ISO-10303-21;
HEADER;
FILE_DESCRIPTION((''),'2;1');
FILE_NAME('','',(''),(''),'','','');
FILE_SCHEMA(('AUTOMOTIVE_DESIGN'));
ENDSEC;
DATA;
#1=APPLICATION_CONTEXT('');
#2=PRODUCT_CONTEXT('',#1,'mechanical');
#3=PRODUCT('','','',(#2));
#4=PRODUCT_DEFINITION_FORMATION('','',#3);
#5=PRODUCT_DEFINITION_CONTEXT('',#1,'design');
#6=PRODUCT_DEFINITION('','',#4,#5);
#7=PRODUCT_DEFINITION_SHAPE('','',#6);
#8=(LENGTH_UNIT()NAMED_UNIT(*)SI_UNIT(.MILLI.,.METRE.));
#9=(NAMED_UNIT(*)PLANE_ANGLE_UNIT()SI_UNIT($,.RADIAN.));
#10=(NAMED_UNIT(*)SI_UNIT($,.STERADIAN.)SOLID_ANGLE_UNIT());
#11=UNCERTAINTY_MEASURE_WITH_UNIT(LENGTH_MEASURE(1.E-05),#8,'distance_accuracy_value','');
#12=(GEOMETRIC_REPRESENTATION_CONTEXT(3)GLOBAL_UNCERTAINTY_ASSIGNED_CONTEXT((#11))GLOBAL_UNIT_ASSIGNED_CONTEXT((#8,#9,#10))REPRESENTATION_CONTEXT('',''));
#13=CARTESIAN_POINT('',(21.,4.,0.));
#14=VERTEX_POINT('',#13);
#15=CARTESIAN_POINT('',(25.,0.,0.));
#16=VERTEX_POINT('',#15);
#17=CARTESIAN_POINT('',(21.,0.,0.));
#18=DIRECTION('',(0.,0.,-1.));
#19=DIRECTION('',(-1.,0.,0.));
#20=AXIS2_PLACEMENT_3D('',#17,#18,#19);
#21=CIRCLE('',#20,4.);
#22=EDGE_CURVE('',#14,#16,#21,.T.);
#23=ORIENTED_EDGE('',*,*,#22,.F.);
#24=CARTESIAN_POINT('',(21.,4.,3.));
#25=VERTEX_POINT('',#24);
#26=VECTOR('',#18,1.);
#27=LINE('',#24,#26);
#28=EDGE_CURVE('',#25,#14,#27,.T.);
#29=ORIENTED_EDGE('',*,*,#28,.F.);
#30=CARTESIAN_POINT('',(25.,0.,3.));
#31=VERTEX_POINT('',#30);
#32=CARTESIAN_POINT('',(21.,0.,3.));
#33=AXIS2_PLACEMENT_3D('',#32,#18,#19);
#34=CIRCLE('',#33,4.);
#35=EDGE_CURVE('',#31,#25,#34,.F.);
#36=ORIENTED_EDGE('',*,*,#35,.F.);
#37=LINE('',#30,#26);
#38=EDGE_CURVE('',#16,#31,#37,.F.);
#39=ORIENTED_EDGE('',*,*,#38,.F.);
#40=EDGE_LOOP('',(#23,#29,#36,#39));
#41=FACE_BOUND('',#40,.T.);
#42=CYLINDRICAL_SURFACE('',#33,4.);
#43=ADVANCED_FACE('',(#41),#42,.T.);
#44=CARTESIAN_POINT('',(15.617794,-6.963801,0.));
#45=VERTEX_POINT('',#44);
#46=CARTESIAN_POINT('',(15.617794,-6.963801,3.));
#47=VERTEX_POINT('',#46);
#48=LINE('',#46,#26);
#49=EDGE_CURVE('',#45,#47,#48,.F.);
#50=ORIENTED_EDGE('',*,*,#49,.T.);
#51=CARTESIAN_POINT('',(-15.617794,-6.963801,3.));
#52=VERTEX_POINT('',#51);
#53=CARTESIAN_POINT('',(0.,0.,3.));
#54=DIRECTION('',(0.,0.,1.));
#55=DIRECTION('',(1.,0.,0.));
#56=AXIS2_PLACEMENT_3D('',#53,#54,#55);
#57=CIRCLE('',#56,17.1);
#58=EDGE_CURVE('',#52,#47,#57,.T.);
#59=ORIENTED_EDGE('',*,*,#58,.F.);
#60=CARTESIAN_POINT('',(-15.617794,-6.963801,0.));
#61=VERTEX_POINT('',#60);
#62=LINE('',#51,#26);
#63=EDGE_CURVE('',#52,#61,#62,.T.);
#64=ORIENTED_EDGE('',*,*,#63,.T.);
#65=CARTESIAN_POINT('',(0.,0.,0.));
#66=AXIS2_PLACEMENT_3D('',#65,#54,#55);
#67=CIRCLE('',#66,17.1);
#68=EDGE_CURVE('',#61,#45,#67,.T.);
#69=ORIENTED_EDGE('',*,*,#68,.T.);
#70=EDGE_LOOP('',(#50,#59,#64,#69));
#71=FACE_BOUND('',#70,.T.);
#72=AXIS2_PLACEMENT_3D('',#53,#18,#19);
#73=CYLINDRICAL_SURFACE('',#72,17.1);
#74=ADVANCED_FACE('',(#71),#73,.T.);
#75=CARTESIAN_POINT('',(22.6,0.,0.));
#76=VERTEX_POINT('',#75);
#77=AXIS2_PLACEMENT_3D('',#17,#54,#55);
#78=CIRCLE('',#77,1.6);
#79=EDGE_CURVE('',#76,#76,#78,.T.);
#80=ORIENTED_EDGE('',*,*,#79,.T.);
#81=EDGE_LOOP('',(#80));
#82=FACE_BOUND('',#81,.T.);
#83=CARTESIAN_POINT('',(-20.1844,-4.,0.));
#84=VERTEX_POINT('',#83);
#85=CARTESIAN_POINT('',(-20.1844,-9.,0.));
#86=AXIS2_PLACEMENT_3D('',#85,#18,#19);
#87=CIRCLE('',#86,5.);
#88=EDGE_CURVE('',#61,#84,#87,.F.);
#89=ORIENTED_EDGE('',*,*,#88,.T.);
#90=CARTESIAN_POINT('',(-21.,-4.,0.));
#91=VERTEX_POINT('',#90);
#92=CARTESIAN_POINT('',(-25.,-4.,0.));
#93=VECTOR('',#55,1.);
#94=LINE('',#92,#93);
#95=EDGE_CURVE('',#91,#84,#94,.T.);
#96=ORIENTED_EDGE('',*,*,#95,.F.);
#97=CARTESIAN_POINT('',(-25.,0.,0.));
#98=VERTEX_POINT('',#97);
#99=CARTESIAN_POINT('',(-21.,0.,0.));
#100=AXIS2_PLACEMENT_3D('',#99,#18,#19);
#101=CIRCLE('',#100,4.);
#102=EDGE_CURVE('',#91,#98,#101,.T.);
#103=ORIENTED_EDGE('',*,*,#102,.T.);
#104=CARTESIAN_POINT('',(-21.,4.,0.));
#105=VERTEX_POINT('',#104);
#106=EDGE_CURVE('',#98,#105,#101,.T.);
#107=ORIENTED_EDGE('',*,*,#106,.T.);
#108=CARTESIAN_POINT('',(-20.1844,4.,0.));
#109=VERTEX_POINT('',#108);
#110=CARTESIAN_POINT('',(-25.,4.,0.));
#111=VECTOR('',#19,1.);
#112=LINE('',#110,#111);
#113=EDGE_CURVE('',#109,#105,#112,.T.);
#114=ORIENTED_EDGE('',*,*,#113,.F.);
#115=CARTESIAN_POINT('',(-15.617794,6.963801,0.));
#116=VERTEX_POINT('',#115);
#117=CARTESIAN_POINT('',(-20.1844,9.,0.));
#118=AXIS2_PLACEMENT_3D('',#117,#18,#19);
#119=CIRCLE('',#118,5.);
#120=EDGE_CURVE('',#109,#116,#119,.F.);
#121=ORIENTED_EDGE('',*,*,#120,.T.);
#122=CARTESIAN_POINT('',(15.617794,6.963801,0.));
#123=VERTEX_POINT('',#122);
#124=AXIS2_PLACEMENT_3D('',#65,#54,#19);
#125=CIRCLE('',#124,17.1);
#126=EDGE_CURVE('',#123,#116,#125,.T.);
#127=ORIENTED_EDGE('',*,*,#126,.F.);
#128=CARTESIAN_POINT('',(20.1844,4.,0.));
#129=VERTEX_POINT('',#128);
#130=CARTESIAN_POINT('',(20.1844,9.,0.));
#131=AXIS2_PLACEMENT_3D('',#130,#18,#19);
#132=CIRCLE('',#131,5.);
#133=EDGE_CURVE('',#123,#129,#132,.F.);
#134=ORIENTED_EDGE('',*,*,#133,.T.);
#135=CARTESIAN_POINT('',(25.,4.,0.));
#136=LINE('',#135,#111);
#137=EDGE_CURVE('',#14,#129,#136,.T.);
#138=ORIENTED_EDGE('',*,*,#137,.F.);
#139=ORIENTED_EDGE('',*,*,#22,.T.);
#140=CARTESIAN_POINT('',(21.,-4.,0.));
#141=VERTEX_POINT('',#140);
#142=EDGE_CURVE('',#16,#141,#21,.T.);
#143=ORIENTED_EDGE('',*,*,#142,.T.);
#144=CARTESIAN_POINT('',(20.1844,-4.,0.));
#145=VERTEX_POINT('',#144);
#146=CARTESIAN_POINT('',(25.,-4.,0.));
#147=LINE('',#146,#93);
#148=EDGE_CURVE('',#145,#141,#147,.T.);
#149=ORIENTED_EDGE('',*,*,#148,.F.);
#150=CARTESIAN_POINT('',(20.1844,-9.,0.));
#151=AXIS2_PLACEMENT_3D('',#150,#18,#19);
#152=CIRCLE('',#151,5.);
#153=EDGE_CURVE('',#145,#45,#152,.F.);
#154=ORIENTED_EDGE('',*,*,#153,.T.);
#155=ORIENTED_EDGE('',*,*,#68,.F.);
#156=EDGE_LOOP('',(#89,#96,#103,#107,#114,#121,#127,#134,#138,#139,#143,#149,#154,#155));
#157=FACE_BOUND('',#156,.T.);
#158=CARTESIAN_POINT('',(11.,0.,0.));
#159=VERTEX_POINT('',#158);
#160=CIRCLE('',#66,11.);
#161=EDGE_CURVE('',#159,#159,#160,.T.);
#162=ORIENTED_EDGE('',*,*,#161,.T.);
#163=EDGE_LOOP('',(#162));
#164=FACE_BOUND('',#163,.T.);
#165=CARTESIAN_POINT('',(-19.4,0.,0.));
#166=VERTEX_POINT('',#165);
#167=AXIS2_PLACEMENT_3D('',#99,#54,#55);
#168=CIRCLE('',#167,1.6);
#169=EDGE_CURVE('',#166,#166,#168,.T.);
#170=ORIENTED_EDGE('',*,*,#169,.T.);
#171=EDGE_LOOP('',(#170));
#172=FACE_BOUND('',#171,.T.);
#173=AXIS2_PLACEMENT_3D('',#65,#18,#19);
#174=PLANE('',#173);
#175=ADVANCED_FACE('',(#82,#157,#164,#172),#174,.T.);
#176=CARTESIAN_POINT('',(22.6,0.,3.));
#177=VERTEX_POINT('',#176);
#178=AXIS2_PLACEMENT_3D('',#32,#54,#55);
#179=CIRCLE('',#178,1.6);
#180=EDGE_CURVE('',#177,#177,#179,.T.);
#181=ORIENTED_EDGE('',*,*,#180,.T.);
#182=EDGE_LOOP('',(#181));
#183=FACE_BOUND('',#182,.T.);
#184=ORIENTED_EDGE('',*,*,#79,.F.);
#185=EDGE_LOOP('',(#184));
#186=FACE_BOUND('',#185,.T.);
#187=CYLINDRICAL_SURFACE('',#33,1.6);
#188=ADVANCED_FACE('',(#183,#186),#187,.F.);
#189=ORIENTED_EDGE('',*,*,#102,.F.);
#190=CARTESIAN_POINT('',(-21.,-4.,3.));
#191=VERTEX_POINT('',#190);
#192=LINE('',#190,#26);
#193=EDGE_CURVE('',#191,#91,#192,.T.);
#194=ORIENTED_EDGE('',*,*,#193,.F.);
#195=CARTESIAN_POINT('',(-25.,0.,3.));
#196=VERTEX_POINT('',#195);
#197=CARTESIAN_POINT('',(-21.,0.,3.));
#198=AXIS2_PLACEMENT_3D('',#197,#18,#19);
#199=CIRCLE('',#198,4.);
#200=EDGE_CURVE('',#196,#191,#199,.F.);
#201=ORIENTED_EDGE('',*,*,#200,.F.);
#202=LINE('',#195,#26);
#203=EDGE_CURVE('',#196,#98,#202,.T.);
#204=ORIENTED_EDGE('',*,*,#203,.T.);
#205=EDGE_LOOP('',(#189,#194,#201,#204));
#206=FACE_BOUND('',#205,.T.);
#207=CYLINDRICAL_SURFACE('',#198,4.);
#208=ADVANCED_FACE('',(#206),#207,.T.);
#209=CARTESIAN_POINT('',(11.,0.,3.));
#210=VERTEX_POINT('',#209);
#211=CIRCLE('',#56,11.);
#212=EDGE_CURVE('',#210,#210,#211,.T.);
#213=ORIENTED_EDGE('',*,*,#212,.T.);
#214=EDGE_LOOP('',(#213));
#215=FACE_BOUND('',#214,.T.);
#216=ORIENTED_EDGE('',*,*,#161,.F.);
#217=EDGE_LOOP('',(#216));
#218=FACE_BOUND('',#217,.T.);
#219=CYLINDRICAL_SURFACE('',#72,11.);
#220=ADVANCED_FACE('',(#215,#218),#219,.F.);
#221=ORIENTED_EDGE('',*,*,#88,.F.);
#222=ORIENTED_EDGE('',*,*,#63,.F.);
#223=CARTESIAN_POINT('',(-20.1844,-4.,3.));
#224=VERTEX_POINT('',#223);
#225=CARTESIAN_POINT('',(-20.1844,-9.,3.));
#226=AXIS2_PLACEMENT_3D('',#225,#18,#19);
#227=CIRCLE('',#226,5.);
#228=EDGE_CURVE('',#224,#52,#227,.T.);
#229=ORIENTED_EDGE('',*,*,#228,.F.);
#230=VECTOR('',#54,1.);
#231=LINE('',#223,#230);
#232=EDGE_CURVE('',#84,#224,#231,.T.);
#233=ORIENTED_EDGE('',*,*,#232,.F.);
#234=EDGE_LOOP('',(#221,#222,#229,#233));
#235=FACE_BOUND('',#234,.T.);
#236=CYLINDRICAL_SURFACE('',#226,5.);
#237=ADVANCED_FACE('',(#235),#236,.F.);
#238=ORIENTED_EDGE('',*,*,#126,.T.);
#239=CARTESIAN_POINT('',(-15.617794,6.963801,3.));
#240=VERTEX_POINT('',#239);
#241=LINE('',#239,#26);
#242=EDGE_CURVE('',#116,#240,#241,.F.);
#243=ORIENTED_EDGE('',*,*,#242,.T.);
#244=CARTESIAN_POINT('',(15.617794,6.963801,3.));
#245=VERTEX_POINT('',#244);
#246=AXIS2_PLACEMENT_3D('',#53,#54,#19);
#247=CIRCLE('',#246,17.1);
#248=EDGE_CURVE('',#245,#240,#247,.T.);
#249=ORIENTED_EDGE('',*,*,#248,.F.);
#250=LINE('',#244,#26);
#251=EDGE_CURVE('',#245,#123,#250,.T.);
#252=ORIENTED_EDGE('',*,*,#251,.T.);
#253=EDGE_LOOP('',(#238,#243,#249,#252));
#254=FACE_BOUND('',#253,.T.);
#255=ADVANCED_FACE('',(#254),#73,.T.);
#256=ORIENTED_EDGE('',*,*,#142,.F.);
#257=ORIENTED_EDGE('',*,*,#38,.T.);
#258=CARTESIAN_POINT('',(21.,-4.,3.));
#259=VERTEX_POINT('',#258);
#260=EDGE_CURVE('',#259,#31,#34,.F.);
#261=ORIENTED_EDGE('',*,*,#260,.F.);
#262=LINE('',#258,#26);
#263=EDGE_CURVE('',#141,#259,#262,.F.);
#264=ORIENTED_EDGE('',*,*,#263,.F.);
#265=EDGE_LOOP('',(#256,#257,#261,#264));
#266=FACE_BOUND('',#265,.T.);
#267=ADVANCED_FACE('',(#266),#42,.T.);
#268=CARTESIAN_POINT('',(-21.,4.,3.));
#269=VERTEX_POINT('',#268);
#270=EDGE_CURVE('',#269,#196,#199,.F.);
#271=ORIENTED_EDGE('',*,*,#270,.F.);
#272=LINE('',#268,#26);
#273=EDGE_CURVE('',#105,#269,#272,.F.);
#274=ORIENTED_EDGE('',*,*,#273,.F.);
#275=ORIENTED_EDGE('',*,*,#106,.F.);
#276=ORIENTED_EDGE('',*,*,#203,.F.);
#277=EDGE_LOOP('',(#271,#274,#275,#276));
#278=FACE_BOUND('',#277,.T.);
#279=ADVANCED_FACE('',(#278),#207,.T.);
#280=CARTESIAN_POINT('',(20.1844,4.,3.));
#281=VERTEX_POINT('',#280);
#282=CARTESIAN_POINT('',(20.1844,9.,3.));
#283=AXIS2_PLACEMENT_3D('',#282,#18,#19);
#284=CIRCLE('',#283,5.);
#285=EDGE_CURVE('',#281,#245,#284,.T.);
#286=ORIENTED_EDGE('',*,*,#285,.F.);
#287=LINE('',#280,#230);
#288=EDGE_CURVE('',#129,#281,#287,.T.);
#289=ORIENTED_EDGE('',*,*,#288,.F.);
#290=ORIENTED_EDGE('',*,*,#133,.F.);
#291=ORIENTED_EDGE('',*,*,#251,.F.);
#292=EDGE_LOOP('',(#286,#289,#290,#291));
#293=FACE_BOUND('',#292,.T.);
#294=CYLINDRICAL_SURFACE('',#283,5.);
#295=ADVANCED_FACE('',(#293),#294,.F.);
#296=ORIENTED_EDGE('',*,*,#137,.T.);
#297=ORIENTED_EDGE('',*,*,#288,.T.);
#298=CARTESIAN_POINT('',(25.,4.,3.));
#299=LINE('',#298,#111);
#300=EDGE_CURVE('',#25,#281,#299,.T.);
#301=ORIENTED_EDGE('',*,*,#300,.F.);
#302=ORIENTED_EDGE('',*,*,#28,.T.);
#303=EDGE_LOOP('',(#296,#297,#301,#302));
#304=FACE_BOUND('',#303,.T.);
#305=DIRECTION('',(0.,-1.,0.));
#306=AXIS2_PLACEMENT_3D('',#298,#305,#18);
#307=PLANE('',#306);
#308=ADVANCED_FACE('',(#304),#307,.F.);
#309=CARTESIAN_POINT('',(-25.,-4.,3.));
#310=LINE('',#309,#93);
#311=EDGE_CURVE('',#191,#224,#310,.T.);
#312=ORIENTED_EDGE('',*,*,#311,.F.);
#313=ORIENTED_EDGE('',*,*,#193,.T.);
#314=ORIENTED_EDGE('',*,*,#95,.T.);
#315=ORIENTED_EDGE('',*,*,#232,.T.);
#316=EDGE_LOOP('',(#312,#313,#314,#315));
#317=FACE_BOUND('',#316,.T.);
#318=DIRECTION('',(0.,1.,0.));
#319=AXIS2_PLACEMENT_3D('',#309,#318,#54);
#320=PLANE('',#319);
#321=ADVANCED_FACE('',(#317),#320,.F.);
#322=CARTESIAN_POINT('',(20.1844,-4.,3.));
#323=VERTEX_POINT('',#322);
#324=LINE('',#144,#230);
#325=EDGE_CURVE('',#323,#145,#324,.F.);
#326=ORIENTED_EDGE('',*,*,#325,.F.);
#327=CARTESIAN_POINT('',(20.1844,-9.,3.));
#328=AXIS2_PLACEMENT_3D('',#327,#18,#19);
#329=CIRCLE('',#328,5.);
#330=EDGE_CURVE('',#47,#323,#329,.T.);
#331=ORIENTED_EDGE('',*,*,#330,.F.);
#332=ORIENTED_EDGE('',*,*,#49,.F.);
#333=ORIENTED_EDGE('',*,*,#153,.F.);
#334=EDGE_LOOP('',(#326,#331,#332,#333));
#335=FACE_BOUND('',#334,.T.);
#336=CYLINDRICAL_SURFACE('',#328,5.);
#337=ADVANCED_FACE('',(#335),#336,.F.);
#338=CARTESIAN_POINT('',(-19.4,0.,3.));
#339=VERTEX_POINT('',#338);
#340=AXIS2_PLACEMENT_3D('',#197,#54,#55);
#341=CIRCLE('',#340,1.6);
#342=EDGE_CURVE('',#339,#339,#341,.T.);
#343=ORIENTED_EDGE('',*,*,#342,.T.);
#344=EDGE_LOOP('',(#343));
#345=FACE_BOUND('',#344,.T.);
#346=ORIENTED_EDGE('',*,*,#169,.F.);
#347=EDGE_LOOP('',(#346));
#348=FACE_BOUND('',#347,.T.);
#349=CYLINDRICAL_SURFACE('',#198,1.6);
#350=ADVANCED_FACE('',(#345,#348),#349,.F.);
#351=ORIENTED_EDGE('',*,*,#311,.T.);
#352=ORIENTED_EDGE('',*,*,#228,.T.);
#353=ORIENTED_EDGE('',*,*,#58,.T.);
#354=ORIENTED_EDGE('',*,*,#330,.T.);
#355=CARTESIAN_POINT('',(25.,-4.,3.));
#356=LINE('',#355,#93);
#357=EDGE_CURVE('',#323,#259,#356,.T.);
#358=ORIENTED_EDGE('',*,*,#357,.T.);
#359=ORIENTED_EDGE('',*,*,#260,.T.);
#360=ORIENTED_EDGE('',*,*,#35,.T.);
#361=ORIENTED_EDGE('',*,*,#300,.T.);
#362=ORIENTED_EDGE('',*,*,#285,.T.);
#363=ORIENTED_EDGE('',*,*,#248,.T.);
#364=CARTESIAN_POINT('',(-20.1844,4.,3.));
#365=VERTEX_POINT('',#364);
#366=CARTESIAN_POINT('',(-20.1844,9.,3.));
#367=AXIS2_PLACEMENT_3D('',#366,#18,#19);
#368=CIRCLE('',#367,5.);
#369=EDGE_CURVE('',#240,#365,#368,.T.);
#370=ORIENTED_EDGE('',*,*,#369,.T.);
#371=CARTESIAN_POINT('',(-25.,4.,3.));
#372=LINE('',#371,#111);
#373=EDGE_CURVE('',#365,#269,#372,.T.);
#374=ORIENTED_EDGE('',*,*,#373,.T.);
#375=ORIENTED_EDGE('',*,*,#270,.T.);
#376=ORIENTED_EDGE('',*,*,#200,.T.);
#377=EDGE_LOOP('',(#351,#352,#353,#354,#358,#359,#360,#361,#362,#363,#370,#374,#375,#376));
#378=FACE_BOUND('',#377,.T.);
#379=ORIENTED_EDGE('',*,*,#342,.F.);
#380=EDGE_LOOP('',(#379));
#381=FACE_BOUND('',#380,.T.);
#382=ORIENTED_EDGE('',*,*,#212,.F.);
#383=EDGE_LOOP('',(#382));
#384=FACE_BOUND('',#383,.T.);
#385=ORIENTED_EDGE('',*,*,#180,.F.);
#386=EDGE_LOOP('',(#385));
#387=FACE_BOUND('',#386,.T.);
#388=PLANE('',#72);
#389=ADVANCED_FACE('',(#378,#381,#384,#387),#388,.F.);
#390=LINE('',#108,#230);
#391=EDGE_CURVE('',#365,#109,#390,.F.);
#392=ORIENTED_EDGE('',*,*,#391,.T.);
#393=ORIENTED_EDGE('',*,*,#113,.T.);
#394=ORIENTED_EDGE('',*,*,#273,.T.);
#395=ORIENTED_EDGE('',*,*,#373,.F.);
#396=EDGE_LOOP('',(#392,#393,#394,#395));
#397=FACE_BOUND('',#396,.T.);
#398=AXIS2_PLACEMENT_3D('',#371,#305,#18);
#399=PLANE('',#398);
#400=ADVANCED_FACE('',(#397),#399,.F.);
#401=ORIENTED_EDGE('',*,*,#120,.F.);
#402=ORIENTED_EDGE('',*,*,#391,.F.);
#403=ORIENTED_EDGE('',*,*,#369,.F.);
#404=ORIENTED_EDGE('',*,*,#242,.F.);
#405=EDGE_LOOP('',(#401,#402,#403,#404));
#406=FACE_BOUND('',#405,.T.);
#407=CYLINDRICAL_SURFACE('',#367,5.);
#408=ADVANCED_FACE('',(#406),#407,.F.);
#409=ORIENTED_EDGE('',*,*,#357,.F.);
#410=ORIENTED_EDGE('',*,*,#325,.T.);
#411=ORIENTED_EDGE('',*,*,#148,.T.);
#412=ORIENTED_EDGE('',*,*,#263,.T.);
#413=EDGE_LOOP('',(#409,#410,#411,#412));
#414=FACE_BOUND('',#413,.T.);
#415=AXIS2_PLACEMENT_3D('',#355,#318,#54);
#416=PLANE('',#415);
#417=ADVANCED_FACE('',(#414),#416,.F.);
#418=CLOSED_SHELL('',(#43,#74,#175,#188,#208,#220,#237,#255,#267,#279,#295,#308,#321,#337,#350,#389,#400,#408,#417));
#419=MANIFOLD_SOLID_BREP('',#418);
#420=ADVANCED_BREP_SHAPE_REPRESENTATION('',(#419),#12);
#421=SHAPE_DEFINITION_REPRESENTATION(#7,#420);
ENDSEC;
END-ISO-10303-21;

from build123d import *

# Parameters (mm, degrees)
ESBO_O1_R                = 11
ESBO_O1_R_2              = 1.6
RESSALTO_EXTRUS_O1_DEPTH = 3
FILETE2_R                = 5
FILETE3_R                = 4


with BuildPart() as part:
    # Esboço1 → Ressalto-extrusão1 (new body)
    with BuildSketch(Plane.XY):
        with BuildLine():
            Line((-25, 4), (-16.625582697, 4))
            ThreePointArc((-16.625582697, 4), (0, 17.1), (16.625582697, 4))
            Line((16.625582697, 4), (25, 4))
            Line((25, 4), (25, -4))
            Line((25, -4), (16.625582697, -4))
            ThreePointArc((16.625582697, -4), (0, -17.1), (-16.625582697, -4))
            Line((-16.625582697, -4), (-25, -4))
            Line((-25, -4), (-25, 4))
        make_face()
        Circle(ESBO_O1_R, mode=Mode.SUBTRACT)
        with Locations((-21, 0)):
            Circle(ESBO_O1_R_2, mode=Mode.SUBTRACT)
        with Locations((21, 0)):
            Circle(ESBO_O1_R_2, mode=Mode.SUBTRACT)
    extrude(amount=RESSALTO_EXTRUS_O1_DEPTH)

    # Filete2
    filete2_edges = [part.edges().sort_by_distance(p)[0] for p in [
        (-16.625582697, 4, 1.5),
        (16.625582697, 4, 1.5),
        (16.625582697, -4, 1.5),
        (-16.625582697, -4, 1.5),
    ]]
    fillet(filete2_edges, radius=FILETE2_R)

    # Filete3
    filete3_edges = [part.edges().sort_by_distance(p)[0] for p in [
        (25, -4, 1.5),
        (25, 4, 1.5),
        (-25, -4, 1.5),
        (-25, 4, 1.5),
    ]]
    fillet(filete3_edges, radius=FILETE3_R - 0.0001)  # a hair under: the kernel refuses the full size


solid = part.part
